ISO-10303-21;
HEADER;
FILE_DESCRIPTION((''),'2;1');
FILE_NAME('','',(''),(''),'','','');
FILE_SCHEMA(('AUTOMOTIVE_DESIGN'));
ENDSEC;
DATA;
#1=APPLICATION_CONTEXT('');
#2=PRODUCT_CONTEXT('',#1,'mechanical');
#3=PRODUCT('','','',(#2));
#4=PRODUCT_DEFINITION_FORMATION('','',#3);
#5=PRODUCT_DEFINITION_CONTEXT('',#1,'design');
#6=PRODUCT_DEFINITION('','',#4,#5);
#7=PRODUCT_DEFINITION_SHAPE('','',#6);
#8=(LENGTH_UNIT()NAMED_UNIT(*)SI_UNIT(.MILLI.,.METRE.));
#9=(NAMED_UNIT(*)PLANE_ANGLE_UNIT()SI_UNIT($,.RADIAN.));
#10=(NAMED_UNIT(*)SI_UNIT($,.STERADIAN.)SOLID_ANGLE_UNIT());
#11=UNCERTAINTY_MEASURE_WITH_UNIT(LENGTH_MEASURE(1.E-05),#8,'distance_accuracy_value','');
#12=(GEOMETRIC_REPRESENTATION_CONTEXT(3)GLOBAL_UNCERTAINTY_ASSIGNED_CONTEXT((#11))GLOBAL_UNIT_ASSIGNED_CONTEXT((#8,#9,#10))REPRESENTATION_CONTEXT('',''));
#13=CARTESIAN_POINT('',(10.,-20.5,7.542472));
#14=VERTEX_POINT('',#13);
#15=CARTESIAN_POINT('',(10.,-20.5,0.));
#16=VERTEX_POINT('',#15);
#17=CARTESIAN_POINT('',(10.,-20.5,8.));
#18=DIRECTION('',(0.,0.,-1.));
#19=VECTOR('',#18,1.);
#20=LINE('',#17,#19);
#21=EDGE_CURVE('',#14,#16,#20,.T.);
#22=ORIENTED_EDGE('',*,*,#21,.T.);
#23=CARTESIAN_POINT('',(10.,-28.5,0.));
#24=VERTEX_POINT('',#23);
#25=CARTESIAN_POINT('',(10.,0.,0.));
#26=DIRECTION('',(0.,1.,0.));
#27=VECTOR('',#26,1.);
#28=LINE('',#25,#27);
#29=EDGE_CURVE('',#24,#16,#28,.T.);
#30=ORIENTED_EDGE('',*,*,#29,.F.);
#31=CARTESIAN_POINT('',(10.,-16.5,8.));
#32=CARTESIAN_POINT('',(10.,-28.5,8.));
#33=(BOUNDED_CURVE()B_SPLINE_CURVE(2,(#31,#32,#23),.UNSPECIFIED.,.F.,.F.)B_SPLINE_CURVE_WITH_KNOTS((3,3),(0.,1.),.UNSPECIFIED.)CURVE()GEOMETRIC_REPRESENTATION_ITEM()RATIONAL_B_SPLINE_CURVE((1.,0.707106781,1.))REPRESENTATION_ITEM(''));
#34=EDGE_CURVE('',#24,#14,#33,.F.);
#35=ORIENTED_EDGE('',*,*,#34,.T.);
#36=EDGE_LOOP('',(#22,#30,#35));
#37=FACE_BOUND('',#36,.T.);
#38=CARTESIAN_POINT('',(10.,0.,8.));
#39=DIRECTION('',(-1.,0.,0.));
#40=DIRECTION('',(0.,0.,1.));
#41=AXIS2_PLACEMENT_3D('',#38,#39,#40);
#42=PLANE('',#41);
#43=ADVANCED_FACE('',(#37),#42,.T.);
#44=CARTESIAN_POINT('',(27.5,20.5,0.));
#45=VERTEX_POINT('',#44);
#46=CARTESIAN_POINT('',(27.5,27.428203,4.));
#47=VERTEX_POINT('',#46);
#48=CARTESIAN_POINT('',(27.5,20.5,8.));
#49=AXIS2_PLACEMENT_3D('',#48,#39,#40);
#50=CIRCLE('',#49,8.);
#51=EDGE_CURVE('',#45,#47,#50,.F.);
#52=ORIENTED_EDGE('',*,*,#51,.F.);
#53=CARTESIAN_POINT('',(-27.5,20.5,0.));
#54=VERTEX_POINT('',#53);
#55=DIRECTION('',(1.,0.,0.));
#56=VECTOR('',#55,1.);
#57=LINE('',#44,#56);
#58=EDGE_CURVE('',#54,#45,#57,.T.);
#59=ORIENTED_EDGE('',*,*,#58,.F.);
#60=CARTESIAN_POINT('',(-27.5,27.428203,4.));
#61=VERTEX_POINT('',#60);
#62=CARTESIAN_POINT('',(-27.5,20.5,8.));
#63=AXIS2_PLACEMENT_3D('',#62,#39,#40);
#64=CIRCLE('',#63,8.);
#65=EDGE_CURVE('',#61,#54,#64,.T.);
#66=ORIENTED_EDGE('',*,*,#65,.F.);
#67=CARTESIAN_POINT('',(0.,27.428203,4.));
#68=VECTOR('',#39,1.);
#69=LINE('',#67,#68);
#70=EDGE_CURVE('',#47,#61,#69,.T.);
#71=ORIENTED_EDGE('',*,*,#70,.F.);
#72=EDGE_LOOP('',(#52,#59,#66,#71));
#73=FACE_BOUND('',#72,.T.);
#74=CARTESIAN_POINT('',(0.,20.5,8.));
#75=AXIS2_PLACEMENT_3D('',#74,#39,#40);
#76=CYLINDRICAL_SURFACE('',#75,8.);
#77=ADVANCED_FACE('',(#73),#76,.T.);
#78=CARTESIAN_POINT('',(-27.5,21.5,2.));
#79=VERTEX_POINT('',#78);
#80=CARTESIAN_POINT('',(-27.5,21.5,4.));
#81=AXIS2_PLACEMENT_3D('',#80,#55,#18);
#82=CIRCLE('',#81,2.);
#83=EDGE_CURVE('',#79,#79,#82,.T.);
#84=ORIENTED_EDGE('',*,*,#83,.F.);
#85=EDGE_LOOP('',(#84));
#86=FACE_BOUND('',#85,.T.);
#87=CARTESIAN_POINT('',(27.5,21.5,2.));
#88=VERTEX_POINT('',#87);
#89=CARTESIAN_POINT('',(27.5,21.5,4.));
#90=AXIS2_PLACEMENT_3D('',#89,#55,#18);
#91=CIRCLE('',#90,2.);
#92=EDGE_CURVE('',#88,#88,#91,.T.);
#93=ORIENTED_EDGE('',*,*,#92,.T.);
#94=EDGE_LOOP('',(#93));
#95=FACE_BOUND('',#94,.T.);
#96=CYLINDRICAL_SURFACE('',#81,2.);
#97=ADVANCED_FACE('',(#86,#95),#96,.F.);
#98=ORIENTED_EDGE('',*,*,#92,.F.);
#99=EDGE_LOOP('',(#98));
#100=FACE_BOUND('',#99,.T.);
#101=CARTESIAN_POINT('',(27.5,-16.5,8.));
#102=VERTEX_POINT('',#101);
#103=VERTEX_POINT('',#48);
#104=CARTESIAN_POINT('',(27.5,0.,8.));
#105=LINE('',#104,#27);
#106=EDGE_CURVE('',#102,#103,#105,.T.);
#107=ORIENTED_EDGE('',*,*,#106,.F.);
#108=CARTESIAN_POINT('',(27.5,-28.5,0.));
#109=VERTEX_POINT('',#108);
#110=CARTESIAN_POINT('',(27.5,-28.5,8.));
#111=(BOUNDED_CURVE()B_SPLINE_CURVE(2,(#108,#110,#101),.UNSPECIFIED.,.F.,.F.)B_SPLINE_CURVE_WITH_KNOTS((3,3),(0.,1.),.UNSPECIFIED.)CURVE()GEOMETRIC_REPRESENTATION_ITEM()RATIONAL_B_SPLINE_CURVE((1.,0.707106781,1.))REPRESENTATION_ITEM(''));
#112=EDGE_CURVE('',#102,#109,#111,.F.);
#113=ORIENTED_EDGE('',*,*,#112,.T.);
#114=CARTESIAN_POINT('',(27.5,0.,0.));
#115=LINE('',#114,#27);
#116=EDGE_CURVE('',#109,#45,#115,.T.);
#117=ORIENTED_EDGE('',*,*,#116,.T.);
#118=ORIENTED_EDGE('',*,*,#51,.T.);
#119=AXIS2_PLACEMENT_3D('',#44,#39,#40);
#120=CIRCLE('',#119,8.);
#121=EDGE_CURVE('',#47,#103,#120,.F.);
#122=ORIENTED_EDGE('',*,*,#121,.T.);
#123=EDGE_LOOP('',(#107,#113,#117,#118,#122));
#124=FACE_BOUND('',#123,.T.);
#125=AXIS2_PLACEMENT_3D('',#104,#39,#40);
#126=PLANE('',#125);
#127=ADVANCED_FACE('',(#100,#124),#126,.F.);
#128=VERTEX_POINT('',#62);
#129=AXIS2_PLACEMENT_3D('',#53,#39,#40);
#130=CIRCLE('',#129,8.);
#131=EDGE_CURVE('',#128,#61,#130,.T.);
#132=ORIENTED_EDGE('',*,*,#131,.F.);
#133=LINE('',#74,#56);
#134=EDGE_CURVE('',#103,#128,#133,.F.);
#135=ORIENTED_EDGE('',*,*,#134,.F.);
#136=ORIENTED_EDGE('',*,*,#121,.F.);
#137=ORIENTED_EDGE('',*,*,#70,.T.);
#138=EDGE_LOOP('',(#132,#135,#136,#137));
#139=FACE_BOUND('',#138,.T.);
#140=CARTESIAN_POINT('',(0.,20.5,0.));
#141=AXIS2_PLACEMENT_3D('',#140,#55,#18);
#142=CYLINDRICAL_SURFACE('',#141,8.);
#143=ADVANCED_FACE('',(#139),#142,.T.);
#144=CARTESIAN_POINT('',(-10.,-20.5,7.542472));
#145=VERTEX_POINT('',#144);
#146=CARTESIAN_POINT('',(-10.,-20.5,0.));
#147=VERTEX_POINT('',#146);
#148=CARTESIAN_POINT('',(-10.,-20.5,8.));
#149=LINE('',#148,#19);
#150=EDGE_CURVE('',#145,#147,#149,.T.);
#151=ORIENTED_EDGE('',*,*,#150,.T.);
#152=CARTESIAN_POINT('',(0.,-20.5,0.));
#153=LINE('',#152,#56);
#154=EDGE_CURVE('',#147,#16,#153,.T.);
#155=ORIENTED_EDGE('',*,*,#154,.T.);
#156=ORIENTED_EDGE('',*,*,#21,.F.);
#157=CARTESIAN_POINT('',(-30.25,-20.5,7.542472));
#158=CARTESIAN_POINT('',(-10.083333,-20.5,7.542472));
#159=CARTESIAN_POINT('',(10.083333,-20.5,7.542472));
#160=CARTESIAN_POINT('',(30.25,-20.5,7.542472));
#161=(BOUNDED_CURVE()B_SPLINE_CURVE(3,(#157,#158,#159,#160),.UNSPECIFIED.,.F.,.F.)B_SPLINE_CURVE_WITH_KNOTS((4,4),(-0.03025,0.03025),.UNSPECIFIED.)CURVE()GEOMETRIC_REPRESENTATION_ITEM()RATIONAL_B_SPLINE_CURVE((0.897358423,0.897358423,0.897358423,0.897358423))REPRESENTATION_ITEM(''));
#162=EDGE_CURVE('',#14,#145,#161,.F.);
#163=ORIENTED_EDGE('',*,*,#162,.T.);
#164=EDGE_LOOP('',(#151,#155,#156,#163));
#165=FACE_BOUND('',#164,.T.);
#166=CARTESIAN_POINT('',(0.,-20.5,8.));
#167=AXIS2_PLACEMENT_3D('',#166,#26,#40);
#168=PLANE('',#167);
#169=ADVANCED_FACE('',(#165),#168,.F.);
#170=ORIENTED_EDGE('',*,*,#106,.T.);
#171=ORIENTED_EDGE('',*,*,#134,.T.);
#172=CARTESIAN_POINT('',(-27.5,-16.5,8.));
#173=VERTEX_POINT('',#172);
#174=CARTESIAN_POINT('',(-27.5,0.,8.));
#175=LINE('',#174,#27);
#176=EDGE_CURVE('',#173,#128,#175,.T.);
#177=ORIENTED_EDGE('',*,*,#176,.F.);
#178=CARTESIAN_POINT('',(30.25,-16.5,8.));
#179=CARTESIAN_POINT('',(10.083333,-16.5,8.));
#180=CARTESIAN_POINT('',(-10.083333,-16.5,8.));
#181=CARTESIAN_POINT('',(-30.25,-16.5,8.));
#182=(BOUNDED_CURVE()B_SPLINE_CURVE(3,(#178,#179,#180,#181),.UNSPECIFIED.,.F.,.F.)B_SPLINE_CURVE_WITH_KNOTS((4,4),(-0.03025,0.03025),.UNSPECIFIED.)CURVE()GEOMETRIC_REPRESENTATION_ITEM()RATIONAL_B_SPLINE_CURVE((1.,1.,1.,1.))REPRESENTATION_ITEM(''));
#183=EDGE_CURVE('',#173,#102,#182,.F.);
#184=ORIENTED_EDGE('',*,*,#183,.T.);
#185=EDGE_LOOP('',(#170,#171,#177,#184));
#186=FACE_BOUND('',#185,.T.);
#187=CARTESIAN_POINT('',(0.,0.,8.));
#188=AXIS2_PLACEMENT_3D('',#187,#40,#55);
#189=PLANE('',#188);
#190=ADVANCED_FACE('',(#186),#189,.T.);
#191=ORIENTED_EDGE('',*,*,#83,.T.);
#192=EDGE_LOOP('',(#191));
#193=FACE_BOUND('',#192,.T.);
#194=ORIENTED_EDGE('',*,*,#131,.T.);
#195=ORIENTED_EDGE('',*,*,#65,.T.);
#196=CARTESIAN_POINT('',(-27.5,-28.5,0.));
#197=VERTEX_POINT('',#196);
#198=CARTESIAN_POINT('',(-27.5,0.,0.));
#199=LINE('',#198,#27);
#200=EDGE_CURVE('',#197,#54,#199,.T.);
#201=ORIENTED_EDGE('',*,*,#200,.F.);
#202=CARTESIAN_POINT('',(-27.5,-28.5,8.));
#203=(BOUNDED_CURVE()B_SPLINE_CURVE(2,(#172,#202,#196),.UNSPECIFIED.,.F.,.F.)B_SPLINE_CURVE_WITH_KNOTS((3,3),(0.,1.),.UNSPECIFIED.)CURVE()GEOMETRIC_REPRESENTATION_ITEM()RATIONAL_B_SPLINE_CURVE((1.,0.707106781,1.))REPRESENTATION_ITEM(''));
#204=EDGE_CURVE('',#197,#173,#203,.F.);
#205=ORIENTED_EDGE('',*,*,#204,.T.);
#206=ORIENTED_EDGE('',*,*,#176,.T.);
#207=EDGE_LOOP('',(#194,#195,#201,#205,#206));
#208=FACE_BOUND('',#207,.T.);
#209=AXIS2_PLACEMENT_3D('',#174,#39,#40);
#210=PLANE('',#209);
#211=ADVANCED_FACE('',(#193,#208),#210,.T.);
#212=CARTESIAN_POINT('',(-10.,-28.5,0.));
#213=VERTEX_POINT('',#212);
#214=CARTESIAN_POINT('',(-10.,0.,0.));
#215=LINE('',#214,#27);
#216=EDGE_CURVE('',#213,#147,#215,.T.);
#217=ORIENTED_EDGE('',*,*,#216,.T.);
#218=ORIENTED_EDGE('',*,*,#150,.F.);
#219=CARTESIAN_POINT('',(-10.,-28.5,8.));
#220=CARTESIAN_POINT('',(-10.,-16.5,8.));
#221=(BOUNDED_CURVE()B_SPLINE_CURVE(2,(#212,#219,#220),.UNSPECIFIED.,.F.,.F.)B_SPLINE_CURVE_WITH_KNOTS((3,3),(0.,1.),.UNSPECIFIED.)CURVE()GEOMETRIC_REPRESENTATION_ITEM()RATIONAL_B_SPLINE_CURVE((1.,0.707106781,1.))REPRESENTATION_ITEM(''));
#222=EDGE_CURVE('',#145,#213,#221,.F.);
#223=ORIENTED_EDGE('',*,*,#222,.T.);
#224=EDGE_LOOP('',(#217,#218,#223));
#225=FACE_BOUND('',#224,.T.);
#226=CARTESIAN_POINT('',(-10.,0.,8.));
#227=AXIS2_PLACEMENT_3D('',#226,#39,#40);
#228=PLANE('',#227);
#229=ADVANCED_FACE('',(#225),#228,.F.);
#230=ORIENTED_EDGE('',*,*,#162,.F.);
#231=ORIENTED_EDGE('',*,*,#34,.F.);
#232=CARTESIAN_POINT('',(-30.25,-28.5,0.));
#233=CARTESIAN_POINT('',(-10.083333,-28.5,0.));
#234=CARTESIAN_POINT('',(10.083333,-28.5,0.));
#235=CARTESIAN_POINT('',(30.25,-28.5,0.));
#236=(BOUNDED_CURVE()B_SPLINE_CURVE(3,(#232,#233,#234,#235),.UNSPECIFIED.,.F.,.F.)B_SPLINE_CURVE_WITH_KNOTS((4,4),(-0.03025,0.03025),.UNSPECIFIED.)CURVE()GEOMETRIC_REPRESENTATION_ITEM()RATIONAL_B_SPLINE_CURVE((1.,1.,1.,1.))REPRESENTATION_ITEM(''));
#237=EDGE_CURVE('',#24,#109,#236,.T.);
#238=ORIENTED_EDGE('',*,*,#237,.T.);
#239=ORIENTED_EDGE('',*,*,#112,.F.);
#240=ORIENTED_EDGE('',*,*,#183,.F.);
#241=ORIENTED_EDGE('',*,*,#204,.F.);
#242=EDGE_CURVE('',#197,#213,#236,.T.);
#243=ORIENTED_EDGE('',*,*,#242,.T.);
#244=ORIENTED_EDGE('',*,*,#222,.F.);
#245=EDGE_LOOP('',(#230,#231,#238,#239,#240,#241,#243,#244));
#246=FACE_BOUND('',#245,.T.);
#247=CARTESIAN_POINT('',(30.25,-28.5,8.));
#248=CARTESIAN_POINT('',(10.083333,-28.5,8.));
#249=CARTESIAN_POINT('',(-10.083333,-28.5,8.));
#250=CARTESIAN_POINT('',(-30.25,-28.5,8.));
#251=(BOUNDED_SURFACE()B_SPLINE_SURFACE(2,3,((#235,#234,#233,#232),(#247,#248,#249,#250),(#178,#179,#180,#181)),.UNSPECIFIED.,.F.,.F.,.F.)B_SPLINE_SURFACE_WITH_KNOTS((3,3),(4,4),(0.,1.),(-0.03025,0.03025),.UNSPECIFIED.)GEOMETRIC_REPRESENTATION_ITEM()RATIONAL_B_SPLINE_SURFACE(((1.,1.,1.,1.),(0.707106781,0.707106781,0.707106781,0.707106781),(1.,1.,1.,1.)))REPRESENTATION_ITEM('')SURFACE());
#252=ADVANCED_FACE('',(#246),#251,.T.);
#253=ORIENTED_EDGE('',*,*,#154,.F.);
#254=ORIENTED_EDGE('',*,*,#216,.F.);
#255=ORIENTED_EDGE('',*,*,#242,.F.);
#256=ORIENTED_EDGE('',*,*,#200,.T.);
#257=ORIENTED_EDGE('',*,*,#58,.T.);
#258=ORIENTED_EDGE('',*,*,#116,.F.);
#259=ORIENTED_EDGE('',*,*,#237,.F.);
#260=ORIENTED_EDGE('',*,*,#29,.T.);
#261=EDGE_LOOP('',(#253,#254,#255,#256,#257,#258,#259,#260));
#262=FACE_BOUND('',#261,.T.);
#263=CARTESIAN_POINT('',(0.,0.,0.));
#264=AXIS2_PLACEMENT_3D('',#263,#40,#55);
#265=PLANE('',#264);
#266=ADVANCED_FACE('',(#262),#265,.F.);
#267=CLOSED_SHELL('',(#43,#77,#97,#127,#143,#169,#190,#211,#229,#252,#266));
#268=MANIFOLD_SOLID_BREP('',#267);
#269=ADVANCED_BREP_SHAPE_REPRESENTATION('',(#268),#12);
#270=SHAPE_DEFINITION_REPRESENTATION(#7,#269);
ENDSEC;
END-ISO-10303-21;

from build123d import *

# Parameters (mm, degrees)
BOSS_EXTRUDE1_DEPTH = 8
SKETCH2_R           = 2
CUT_EXTRUDE1_DEPTH  = 63.459987192
FILLET3_R           = 8
FILLET4_START       = -27.5
FILLET4_DEPTH       = 55


with BuildPart() as part:
    # Sketch1 → Boss-Extrude1 (new body)
    with BuildSketch(Plane.XY):
        Polygon((-27.5, 28.5), (-27.5, -28.5), (-10, -28.5), (-10, -20.5), (10, -20.5), (10, -28.5), (27.5, -28.5), (27.5, 28.5), align=None)
    extrude(amount=BOSS_EXTRUDE1_DEPTH)

    # Sketch2 → Cut-Extrude1 (cut, through all)
    with BuildSketch(Plane(origin=(27.5, 0, 0), x_dir=(0, 0, -1), z_dir=(1, 0, 0))):
        with Locations((-4, 21.5)):
            Circle(SKETCH2_R)
    extrude(amount=-CUT_EXTRUDE1_DEPTH, mode=Mode.SUBTRACT)

    # Fillet3
    # the kernel refuses this fillet: 8 mm, written as the material it takes off along each edge
    with BuildSketch(Plane(origin=(47.5, 28.5, 8), x_dir=(0, 0, -1), z_dir=(-1, 0, 0))) as fillet3_piece_1:
        with BuildLine():
            CenterArc((FILLET3_R, FILLET3_R), FILLET3_R, 180, 90)
            Line((0, FILLET3_R), (0, 0))
            Line((0, 0), (FILLET3_R, 0))
        make_face()
    extrude(amount=95, mode=Mode.SUBTRACT)
    with BuildSketch(Plane(origin=(47.5, 28.5, 0), x_dir=(0, 0, 1), z_dir=(-1, 0, 0))) as fillet3_piece_2:
        with BuildLine():
            CenterArc((FILLET3_R, -FILLET3_R), FILLET3_R, 90, 90)
            Line((0, -FILLET3_R), (0, 0))
            Line((0, 0), (FILLET3_R, 0))
        make_face()
    extrude(amount=95, mode=Mode.SUBTRACT)

    # Fillet4: read off the stored shape, not the designer's step
    # Fillet4 outline → Fillet4 (cut)
    with BuildSketch(Plane.YZ.offset(FILLET4_START)):
        with BuildLine():
            Line((-28.5, 8), (-28.5, 0))
            add(Edge.make_bspline(
                [(-28.5, 0), (-28.5, 8), (-16.5, 8)],
                knots=[0, 0, 0, 1, 1, 1], degree=2, weights=[1, 0.707106781, 1]))
            Line((-16.5, 8), (-28.5, 8))
        make_face()
    extrude(amount=FILLET4_DEPTH, mode=Mode.SUBTRACT)


solid = part.part
